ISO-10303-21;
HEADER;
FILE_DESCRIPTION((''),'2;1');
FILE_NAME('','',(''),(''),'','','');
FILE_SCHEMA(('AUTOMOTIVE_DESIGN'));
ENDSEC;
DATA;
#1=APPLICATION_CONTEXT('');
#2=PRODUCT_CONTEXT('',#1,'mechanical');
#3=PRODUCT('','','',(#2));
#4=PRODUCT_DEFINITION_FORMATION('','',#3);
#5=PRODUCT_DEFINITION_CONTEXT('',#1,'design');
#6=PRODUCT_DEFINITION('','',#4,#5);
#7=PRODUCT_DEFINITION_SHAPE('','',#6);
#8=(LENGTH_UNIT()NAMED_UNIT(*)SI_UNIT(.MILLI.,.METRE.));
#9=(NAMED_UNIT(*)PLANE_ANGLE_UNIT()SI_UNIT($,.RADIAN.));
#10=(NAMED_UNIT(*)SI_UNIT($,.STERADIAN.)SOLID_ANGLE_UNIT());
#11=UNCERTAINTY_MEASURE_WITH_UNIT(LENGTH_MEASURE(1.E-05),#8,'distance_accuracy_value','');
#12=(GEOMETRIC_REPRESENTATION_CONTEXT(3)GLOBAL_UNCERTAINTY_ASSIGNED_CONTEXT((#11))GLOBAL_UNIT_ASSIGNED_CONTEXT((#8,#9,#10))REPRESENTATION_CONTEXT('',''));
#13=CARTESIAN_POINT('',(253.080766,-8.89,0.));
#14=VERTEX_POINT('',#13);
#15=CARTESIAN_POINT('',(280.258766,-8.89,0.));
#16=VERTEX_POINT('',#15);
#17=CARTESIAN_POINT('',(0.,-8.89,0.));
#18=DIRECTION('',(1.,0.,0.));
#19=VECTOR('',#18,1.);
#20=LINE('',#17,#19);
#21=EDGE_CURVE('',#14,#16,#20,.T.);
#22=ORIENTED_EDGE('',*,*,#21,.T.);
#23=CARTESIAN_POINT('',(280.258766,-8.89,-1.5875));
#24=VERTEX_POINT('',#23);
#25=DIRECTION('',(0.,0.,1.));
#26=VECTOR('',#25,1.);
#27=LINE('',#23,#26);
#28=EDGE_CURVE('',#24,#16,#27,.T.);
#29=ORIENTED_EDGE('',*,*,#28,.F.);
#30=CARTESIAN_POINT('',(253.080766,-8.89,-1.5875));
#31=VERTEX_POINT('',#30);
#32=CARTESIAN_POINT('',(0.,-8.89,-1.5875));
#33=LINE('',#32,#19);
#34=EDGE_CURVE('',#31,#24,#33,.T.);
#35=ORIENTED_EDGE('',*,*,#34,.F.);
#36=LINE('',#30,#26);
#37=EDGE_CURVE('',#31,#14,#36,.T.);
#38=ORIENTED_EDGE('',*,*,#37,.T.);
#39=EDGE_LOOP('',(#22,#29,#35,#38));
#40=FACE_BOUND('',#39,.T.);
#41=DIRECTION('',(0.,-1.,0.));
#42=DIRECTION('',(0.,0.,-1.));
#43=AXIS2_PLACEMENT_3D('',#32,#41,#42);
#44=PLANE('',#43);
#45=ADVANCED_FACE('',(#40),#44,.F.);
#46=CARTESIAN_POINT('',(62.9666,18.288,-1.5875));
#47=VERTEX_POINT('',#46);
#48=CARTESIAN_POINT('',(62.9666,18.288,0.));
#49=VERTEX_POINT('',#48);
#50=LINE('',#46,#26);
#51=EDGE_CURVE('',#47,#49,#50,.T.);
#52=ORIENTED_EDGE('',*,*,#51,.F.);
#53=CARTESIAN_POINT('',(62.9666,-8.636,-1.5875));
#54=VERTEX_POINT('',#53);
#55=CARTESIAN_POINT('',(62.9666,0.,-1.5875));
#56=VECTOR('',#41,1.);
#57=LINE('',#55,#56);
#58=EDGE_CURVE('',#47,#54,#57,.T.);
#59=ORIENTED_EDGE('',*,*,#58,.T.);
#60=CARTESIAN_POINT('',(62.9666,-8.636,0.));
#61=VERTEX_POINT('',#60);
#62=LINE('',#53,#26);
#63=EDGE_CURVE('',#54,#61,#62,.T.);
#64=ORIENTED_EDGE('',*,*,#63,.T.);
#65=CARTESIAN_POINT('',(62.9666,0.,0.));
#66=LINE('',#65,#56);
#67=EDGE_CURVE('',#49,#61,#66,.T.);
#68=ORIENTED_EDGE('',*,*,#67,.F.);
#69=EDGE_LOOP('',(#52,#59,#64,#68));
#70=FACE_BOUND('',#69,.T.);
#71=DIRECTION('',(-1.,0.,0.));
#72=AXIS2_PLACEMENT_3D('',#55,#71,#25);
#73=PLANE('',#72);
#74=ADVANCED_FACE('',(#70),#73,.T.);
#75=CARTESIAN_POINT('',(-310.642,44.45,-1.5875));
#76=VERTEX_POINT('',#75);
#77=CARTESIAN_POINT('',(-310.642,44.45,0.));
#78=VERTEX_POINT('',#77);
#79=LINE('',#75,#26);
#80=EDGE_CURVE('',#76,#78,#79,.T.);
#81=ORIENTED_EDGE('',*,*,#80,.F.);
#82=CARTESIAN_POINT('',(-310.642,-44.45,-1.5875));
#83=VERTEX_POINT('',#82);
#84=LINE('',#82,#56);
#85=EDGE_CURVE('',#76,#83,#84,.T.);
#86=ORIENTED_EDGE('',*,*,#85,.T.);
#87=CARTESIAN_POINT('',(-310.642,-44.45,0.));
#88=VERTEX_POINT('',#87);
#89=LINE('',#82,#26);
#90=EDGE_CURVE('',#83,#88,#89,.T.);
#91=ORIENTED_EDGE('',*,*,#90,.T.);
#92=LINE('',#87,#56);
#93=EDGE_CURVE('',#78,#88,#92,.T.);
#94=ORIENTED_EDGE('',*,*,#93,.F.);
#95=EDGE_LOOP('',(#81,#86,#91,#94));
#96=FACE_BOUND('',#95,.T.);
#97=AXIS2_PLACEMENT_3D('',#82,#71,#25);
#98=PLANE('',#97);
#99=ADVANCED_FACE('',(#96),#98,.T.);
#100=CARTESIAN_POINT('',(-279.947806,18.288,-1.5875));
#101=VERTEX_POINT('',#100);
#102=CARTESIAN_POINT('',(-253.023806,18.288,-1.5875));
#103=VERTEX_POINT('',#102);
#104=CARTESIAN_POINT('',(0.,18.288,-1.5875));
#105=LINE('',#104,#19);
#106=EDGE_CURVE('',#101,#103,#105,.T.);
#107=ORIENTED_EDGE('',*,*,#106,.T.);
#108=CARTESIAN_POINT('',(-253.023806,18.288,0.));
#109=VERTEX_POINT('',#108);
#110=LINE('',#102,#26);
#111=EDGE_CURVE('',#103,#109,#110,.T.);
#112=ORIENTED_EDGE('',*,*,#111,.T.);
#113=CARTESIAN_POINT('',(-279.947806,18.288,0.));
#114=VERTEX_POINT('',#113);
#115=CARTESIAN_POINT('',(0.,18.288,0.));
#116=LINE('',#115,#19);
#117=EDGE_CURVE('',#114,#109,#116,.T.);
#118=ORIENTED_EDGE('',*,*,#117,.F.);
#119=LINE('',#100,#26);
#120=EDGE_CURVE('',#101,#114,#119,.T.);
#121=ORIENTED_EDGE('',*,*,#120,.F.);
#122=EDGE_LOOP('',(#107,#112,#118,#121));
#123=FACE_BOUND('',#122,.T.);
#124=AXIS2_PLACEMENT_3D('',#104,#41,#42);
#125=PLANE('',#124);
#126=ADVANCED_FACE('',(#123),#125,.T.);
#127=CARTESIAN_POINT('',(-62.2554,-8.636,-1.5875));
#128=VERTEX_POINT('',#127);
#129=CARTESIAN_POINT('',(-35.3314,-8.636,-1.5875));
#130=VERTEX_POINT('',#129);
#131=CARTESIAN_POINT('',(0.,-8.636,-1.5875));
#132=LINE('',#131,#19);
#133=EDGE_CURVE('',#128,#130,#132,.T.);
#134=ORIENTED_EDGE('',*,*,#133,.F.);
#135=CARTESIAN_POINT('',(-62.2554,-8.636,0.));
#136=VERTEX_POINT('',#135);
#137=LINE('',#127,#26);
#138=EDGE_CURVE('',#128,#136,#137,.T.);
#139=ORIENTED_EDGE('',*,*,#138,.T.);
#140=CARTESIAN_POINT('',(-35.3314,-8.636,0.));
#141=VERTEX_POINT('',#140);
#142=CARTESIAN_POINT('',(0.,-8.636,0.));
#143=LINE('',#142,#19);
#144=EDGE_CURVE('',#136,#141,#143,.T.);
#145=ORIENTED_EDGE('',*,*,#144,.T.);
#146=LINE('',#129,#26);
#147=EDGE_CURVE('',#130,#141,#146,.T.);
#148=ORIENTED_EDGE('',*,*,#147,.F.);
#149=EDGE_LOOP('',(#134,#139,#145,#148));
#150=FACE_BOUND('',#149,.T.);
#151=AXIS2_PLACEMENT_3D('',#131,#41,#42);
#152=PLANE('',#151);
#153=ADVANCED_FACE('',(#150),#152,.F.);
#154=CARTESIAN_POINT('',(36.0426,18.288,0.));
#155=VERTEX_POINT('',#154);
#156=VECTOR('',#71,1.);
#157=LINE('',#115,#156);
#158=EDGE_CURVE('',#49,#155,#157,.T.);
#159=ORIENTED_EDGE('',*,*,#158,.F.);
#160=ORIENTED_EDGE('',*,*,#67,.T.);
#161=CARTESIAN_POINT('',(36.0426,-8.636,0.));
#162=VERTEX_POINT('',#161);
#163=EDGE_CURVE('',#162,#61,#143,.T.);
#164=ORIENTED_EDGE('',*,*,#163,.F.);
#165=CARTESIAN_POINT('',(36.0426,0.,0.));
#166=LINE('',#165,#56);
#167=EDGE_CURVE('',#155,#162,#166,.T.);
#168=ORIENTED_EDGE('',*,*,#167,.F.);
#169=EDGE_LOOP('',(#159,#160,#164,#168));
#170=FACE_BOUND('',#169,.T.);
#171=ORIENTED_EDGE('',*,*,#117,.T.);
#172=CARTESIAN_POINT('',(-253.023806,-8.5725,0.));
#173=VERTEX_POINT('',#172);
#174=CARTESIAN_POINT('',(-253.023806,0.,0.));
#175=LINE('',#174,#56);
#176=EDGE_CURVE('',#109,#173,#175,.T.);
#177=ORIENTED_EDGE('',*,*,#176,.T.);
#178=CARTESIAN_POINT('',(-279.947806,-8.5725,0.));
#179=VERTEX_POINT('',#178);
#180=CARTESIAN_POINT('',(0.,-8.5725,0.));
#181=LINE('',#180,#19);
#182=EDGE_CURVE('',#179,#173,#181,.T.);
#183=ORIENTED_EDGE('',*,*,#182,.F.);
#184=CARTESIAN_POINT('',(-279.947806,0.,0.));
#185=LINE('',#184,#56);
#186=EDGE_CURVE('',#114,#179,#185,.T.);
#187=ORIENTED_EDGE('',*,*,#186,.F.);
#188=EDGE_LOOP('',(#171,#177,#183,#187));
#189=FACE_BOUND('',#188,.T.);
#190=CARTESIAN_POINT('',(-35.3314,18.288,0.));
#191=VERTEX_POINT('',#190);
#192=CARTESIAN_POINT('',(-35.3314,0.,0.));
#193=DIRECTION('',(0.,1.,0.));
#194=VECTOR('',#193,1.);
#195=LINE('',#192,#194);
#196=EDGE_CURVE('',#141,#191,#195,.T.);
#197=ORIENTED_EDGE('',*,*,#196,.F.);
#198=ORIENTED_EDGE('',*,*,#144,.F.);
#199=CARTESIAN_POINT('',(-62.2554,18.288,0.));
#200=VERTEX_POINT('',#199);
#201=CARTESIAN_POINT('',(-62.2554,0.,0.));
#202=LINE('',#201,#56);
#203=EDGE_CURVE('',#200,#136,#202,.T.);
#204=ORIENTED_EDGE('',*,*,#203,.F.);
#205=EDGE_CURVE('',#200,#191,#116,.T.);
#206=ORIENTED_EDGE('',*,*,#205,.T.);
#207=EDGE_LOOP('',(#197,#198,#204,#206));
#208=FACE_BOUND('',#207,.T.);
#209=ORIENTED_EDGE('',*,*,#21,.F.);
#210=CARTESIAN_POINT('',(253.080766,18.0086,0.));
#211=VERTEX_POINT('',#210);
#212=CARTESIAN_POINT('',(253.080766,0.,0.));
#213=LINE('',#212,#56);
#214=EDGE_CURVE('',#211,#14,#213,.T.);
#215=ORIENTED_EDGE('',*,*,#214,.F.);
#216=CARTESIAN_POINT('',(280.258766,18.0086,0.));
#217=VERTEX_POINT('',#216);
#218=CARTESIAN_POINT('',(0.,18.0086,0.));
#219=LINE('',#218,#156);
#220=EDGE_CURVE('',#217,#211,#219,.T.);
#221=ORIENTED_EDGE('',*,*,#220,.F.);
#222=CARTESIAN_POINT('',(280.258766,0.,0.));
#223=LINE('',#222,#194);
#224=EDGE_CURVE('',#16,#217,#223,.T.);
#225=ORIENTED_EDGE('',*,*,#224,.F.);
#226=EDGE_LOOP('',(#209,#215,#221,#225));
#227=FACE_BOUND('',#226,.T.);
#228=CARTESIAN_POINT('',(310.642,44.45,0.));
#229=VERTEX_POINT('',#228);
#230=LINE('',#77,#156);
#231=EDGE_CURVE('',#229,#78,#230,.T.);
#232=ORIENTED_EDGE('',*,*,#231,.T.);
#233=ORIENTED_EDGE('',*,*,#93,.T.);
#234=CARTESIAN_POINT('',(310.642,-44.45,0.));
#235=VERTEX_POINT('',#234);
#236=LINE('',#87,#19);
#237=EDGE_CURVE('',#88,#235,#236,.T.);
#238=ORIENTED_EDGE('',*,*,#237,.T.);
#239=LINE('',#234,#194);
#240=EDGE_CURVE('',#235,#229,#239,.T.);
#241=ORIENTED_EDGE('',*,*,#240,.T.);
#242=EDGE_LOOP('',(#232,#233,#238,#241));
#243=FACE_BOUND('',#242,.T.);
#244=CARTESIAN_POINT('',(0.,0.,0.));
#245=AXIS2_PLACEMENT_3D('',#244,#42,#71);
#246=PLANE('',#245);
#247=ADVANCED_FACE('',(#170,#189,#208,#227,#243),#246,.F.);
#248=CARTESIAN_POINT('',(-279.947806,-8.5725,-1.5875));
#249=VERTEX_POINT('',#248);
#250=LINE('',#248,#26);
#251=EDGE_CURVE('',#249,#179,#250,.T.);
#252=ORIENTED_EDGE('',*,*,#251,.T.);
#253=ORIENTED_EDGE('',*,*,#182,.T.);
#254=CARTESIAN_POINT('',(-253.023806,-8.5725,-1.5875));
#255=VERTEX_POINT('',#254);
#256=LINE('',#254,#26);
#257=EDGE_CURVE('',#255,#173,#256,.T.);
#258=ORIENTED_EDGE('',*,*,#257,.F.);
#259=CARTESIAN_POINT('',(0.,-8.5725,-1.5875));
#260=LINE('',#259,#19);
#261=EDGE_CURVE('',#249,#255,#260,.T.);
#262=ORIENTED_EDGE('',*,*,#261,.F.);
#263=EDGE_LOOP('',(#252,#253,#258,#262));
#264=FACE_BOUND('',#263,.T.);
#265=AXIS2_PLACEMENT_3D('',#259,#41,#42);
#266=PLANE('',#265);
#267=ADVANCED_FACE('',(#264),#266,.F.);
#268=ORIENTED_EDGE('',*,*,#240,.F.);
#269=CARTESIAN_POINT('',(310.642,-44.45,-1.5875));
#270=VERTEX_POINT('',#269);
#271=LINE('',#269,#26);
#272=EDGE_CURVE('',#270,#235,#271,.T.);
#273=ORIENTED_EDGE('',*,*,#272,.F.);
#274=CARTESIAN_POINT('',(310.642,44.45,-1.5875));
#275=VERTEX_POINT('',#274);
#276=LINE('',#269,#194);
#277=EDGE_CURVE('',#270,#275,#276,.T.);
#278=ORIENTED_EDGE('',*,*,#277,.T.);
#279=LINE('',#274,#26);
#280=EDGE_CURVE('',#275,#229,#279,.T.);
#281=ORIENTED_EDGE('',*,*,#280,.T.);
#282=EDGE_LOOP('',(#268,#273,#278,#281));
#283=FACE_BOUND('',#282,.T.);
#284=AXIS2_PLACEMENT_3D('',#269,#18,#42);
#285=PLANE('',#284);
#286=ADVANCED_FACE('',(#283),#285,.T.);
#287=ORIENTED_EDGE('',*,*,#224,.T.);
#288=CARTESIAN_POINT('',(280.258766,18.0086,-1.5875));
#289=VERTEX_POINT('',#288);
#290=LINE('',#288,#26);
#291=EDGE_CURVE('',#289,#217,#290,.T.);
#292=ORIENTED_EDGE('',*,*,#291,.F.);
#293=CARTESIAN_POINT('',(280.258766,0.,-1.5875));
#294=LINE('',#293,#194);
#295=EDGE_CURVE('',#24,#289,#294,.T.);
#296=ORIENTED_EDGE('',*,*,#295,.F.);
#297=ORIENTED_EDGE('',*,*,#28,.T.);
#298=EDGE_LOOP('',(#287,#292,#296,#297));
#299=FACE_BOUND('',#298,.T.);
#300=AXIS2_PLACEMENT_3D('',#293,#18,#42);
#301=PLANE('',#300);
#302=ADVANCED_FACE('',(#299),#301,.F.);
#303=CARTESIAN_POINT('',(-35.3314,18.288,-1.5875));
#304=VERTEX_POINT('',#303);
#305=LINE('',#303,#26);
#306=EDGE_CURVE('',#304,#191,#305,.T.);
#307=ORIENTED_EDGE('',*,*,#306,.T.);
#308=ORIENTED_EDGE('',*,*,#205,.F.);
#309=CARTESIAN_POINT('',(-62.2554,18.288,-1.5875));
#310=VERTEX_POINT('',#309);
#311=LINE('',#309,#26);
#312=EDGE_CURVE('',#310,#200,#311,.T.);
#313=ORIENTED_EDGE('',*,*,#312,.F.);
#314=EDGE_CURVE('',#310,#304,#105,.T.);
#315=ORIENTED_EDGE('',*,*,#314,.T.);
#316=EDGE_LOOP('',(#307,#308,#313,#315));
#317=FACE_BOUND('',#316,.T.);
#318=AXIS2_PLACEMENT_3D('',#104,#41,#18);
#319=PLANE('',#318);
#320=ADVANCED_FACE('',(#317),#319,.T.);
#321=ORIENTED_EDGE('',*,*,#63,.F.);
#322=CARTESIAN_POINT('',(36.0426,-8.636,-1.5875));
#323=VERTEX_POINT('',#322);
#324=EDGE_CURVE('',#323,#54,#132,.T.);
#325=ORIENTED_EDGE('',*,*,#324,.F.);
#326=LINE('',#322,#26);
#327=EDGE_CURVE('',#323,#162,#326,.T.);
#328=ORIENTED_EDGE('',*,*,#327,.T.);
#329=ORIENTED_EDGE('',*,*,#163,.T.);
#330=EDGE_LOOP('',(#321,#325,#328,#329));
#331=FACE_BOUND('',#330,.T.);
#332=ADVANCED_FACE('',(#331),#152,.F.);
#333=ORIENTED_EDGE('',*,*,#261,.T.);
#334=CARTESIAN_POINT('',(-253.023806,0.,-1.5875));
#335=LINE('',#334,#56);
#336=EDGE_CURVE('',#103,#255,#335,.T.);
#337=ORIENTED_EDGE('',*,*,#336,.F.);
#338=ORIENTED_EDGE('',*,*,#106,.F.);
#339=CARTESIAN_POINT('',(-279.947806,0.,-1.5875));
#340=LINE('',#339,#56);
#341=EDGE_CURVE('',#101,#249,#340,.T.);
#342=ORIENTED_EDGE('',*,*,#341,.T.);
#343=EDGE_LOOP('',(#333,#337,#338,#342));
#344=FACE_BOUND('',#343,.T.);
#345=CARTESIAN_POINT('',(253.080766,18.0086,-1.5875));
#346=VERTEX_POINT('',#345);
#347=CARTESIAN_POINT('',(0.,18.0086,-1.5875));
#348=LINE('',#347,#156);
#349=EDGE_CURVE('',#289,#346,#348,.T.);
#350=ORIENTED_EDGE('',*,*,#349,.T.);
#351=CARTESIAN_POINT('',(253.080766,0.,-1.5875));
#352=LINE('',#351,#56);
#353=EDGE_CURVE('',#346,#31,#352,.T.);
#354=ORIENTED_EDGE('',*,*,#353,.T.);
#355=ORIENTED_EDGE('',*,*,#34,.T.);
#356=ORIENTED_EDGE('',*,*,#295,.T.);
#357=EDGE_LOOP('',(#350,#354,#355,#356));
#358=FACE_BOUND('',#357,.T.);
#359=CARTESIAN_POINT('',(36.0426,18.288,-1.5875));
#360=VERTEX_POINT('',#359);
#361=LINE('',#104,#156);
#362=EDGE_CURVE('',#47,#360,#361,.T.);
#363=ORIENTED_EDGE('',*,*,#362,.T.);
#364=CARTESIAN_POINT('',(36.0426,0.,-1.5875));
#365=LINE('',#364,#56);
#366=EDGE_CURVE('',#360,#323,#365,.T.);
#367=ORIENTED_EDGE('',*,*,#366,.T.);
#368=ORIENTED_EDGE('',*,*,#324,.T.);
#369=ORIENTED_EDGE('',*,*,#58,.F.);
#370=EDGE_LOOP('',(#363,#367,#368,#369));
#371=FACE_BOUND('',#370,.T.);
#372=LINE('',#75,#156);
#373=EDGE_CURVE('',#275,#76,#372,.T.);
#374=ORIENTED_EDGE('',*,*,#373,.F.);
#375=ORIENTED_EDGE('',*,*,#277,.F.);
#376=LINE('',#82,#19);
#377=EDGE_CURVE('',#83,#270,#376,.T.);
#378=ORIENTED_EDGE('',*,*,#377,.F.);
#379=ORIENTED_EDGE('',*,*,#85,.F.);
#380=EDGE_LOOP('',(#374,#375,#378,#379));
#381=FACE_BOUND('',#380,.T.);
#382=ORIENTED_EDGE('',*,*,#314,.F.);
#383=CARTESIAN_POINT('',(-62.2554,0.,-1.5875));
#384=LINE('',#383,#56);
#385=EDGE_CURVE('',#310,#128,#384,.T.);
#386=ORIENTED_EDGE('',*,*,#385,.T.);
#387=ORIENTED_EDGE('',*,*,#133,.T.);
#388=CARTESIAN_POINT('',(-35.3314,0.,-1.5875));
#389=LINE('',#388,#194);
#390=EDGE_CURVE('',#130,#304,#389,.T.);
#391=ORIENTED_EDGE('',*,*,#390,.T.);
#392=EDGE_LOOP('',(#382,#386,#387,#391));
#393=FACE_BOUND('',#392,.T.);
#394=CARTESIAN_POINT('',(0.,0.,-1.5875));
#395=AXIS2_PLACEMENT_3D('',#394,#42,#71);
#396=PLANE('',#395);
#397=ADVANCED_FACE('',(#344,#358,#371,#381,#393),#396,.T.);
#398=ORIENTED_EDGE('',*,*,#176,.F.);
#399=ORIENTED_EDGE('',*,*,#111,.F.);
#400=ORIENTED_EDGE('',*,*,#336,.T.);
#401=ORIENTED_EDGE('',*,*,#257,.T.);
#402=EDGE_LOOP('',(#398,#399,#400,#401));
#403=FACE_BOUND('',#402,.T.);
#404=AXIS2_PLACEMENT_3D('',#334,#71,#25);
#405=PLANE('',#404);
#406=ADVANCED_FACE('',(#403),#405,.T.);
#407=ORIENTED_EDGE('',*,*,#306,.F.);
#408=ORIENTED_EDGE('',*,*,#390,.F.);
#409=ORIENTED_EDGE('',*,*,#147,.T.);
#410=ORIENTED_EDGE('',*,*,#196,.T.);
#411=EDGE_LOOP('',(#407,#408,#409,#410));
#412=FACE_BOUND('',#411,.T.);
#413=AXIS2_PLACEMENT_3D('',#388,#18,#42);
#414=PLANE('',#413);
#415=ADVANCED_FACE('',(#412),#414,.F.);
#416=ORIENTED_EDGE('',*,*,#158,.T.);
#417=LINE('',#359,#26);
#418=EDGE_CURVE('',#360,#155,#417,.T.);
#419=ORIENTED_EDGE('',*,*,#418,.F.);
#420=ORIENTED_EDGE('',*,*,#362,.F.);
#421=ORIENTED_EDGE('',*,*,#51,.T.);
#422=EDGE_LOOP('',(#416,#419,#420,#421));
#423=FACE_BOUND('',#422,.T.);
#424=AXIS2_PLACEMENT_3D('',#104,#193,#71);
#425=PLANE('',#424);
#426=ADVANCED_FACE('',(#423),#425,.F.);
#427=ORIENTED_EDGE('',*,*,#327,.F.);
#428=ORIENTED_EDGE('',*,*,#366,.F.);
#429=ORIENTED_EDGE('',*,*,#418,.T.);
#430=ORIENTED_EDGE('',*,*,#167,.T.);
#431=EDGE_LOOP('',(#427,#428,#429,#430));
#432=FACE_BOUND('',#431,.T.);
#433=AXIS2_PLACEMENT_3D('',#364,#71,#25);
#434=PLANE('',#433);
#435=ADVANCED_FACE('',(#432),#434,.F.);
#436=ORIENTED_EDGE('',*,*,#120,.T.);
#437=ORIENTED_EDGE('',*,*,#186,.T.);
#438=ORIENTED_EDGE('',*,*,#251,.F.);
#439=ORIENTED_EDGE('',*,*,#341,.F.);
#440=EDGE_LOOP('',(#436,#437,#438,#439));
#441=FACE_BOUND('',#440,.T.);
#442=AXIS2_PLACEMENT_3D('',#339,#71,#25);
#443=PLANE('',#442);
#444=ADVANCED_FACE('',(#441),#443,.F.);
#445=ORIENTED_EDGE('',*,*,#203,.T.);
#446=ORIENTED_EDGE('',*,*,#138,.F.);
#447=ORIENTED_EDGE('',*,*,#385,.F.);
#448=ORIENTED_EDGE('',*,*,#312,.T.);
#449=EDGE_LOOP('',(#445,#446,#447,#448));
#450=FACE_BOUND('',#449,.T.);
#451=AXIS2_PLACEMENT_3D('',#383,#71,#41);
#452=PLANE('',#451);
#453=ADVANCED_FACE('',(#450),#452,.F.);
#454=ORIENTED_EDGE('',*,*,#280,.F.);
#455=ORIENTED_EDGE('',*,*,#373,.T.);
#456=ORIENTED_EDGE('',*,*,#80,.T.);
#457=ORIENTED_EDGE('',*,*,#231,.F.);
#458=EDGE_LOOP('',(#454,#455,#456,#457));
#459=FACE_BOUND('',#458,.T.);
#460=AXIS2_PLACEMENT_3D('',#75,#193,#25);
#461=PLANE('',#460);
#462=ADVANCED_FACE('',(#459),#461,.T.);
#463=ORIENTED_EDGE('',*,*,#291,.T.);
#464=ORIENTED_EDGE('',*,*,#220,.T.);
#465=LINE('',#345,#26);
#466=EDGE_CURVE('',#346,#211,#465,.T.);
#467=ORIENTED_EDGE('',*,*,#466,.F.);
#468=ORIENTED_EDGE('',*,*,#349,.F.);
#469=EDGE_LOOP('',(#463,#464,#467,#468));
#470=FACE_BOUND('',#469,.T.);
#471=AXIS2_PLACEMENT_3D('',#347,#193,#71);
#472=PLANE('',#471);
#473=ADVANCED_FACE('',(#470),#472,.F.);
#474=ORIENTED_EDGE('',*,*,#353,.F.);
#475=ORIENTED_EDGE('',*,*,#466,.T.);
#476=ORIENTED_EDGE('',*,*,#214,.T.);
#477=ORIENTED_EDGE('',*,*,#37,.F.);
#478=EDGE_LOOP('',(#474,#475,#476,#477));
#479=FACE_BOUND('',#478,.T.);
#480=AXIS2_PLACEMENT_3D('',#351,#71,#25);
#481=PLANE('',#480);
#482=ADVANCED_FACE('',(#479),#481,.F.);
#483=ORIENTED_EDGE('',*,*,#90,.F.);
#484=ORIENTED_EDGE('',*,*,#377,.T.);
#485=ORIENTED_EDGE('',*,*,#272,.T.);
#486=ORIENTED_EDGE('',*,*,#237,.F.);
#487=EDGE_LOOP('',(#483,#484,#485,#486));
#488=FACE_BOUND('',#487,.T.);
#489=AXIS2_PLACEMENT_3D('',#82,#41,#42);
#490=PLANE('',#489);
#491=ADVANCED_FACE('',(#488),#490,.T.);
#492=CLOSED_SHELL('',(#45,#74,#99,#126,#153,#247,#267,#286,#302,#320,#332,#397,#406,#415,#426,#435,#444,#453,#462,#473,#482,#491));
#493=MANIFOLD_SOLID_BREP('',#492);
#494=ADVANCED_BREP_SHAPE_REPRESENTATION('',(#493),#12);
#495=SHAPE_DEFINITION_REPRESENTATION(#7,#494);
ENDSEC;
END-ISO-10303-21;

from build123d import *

# Parameters (mm, degrees)
SKETCH2_W          = 621.284
SKETCH2_H          = 88.9
BASE_FLANGE1_DEPTH = 1.5875
SKETCH7_W          = 26.924
SKETCH7_H          = 26.8605
SKETCH7_W_2        = 27.178
SKETCH7_H_2        = 26.8986
SKETCH7_H_3        = 26.924
CUT_EXTRUDE1_DEPTH = 314.81009356


# Sheet-metal steps are written as plain solids
with BuildPart() as part:
    # Sketch2 → Base-Flange1 (new body)
    with BuildSketch(Plane.XY):
        Rectangle(SKETCH2_W, SKETCH2_H)
    extrude(amount=-BASE_FLANGE1_DEPTH)

    # Sketch7 → Cut-Extrude1 (cut, through all)
    with BuildSketch(Plane.XY):
        with Locations((-266.48580561, 4.85775)):
            Rectangle(SKETCH7_W, SKETCH7_H)
        with Locations((266.66976638, 4.5593)):
            Rectangle(SKETCH7_W_2, SKETCH7_H_2)
        with Locations((-48.7934, 4.826)):
            Rectangle(SKETCH7_W, SKETCH7_H_3)
        with Locations((49.5046, 4.826)):
            Rectangle(SKETCH7_W, SKETCH7_H_3)
    extrude(amount=-CUT_EXTRUDE1_DEPTH, mode=Mode.SUBTRACT)


solid = part.part
